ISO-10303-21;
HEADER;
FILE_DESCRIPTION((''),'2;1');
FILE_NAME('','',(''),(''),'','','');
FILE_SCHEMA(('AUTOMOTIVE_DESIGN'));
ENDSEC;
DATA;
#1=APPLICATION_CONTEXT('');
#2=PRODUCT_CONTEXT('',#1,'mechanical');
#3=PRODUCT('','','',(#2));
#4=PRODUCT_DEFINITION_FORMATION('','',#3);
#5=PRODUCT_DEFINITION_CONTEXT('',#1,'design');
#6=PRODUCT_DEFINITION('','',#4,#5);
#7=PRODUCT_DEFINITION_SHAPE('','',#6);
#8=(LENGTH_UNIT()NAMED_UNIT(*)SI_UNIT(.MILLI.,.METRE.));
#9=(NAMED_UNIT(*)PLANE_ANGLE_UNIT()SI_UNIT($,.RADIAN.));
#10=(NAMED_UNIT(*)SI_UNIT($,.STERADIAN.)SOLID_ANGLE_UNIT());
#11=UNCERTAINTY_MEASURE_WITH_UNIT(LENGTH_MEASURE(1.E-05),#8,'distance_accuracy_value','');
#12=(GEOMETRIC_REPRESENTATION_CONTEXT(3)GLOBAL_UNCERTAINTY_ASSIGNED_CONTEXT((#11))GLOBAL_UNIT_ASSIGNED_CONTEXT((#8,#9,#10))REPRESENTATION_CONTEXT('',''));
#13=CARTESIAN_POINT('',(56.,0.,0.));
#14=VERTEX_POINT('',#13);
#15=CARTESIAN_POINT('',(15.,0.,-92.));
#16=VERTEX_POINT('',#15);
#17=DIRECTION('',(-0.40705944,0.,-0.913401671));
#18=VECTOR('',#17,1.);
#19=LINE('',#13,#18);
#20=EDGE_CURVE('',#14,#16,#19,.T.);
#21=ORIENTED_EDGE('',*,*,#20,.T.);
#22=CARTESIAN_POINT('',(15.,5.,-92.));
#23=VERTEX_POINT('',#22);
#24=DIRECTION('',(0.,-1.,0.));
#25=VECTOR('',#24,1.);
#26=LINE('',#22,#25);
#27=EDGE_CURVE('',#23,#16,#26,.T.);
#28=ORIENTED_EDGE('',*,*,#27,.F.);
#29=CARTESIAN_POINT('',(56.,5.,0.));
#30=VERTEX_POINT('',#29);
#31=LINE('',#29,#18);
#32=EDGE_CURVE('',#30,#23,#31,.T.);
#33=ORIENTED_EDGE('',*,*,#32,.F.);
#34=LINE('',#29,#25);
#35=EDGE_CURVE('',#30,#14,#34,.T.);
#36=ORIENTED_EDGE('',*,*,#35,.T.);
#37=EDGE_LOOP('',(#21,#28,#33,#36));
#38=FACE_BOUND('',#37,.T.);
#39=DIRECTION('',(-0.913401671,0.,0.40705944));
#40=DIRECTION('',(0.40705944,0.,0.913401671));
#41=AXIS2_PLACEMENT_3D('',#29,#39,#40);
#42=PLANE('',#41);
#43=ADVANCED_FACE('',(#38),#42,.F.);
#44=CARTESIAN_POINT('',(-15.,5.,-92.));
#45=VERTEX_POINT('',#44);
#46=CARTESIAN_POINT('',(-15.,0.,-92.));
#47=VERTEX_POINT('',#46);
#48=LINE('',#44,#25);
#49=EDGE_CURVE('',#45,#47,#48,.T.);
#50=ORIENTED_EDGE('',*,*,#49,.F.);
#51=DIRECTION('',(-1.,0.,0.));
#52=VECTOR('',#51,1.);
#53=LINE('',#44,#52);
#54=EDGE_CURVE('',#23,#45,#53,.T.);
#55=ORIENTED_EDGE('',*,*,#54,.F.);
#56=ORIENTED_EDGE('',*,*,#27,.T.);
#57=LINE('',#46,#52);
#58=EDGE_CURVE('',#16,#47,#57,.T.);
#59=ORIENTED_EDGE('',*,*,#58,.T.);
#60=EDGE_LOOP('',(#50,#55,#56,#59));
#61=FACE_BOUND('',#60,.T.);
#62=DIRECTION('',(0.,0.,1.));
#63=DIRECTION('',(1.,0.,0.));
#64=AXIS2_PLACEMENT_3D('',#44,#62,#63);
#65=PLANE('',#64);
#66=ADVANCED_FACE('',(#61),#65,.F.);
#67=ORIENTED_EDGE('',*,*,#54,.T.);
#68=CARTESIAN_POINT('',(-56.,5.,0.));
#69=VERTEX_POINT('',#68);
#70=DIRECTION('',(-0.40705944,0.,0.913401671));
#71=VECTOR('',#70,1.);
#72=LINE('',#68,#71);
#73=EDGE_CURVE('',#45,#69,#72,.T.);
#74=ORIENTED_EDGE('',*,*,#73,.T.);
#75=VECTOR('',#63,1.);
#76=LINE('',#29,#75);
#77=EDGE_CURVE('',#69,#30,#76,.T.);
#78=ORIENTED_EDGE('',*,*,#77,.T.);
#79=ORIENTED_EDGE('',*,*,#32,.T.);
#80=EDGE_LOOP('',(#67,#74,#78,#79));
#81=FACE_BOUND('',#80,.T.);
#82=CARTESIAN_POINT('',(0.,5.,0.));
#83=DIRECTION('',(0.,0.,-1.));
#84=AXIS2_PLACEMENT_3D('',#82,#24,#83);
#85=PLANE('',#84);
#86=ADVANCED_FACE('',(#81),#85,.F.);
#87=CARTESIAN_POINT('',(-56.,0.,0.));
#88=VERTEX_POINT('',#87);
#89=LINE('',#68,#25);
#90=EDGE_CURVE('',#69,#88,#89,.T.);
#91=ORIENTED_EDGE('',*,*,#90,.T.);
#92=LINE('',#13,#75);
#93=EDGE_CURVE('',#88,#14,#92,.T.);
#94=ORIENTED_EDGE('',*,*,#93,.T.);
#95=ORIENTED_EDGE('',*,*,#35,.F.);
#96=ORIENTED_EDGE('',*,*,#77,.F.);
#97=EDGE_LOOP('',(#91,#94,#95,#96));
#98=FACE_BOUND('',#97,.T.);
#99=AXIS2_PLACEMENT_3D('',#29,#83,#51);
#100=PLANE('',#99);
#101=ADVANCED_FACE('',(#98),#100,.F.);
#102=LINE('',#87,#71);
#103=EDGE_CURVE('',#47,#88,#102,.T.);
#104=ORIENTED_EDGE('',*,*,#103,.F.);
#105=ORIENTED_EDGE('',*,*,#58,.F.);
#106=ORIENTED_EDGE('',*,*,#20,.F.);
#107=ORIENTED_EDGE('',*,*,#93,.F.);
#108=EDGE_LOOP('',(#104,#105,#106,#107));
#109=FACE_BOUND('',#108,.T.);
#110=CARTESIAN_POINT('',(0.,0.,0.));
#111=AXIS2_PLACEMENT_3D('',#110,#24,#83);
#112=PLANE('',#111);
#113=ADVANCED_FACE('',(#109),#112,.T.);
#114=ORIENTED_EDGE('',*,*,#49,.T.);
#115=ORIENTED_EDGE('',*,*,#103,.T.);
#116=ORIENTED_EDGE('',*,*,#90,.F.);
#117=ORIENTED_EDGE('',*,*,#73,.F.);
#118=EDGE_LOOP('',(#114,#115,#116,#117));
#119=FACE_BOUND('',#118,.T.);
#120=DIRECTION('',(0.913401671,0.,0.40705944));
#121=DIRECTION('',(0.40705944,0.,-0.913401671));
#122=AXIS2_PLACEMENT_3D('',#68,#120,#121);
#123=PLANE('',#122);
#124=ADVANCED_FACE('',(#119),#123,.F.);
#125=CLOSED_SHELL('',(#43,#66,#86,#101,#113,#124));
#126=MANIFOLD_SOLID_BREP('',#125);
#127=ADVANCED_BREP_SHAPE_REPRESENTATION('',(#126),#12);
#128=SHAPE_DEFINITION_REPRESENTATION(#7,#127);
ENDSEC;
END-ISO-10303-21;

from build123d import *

# Parameters (mm, degrees)
SM_BASE_FLANGE_1_DEPTH = 5


# Sheet-metal steps are written as plain solids
with BuildPart() as part:
    # Sketch 1 → Базовая кромка1 (new body)
    with BuildSketch(Plane(origin=(0, 0, 0), x_dir=(1, 0, 0), z_dir=(0, 1, 0))):
        Polygon((56, 0), (-56, 0), (-15, 92), (15, 92), align=None)
    extrude(amount=SM_BASE_FLANGE_1_DEPTH)


solid = part.part
